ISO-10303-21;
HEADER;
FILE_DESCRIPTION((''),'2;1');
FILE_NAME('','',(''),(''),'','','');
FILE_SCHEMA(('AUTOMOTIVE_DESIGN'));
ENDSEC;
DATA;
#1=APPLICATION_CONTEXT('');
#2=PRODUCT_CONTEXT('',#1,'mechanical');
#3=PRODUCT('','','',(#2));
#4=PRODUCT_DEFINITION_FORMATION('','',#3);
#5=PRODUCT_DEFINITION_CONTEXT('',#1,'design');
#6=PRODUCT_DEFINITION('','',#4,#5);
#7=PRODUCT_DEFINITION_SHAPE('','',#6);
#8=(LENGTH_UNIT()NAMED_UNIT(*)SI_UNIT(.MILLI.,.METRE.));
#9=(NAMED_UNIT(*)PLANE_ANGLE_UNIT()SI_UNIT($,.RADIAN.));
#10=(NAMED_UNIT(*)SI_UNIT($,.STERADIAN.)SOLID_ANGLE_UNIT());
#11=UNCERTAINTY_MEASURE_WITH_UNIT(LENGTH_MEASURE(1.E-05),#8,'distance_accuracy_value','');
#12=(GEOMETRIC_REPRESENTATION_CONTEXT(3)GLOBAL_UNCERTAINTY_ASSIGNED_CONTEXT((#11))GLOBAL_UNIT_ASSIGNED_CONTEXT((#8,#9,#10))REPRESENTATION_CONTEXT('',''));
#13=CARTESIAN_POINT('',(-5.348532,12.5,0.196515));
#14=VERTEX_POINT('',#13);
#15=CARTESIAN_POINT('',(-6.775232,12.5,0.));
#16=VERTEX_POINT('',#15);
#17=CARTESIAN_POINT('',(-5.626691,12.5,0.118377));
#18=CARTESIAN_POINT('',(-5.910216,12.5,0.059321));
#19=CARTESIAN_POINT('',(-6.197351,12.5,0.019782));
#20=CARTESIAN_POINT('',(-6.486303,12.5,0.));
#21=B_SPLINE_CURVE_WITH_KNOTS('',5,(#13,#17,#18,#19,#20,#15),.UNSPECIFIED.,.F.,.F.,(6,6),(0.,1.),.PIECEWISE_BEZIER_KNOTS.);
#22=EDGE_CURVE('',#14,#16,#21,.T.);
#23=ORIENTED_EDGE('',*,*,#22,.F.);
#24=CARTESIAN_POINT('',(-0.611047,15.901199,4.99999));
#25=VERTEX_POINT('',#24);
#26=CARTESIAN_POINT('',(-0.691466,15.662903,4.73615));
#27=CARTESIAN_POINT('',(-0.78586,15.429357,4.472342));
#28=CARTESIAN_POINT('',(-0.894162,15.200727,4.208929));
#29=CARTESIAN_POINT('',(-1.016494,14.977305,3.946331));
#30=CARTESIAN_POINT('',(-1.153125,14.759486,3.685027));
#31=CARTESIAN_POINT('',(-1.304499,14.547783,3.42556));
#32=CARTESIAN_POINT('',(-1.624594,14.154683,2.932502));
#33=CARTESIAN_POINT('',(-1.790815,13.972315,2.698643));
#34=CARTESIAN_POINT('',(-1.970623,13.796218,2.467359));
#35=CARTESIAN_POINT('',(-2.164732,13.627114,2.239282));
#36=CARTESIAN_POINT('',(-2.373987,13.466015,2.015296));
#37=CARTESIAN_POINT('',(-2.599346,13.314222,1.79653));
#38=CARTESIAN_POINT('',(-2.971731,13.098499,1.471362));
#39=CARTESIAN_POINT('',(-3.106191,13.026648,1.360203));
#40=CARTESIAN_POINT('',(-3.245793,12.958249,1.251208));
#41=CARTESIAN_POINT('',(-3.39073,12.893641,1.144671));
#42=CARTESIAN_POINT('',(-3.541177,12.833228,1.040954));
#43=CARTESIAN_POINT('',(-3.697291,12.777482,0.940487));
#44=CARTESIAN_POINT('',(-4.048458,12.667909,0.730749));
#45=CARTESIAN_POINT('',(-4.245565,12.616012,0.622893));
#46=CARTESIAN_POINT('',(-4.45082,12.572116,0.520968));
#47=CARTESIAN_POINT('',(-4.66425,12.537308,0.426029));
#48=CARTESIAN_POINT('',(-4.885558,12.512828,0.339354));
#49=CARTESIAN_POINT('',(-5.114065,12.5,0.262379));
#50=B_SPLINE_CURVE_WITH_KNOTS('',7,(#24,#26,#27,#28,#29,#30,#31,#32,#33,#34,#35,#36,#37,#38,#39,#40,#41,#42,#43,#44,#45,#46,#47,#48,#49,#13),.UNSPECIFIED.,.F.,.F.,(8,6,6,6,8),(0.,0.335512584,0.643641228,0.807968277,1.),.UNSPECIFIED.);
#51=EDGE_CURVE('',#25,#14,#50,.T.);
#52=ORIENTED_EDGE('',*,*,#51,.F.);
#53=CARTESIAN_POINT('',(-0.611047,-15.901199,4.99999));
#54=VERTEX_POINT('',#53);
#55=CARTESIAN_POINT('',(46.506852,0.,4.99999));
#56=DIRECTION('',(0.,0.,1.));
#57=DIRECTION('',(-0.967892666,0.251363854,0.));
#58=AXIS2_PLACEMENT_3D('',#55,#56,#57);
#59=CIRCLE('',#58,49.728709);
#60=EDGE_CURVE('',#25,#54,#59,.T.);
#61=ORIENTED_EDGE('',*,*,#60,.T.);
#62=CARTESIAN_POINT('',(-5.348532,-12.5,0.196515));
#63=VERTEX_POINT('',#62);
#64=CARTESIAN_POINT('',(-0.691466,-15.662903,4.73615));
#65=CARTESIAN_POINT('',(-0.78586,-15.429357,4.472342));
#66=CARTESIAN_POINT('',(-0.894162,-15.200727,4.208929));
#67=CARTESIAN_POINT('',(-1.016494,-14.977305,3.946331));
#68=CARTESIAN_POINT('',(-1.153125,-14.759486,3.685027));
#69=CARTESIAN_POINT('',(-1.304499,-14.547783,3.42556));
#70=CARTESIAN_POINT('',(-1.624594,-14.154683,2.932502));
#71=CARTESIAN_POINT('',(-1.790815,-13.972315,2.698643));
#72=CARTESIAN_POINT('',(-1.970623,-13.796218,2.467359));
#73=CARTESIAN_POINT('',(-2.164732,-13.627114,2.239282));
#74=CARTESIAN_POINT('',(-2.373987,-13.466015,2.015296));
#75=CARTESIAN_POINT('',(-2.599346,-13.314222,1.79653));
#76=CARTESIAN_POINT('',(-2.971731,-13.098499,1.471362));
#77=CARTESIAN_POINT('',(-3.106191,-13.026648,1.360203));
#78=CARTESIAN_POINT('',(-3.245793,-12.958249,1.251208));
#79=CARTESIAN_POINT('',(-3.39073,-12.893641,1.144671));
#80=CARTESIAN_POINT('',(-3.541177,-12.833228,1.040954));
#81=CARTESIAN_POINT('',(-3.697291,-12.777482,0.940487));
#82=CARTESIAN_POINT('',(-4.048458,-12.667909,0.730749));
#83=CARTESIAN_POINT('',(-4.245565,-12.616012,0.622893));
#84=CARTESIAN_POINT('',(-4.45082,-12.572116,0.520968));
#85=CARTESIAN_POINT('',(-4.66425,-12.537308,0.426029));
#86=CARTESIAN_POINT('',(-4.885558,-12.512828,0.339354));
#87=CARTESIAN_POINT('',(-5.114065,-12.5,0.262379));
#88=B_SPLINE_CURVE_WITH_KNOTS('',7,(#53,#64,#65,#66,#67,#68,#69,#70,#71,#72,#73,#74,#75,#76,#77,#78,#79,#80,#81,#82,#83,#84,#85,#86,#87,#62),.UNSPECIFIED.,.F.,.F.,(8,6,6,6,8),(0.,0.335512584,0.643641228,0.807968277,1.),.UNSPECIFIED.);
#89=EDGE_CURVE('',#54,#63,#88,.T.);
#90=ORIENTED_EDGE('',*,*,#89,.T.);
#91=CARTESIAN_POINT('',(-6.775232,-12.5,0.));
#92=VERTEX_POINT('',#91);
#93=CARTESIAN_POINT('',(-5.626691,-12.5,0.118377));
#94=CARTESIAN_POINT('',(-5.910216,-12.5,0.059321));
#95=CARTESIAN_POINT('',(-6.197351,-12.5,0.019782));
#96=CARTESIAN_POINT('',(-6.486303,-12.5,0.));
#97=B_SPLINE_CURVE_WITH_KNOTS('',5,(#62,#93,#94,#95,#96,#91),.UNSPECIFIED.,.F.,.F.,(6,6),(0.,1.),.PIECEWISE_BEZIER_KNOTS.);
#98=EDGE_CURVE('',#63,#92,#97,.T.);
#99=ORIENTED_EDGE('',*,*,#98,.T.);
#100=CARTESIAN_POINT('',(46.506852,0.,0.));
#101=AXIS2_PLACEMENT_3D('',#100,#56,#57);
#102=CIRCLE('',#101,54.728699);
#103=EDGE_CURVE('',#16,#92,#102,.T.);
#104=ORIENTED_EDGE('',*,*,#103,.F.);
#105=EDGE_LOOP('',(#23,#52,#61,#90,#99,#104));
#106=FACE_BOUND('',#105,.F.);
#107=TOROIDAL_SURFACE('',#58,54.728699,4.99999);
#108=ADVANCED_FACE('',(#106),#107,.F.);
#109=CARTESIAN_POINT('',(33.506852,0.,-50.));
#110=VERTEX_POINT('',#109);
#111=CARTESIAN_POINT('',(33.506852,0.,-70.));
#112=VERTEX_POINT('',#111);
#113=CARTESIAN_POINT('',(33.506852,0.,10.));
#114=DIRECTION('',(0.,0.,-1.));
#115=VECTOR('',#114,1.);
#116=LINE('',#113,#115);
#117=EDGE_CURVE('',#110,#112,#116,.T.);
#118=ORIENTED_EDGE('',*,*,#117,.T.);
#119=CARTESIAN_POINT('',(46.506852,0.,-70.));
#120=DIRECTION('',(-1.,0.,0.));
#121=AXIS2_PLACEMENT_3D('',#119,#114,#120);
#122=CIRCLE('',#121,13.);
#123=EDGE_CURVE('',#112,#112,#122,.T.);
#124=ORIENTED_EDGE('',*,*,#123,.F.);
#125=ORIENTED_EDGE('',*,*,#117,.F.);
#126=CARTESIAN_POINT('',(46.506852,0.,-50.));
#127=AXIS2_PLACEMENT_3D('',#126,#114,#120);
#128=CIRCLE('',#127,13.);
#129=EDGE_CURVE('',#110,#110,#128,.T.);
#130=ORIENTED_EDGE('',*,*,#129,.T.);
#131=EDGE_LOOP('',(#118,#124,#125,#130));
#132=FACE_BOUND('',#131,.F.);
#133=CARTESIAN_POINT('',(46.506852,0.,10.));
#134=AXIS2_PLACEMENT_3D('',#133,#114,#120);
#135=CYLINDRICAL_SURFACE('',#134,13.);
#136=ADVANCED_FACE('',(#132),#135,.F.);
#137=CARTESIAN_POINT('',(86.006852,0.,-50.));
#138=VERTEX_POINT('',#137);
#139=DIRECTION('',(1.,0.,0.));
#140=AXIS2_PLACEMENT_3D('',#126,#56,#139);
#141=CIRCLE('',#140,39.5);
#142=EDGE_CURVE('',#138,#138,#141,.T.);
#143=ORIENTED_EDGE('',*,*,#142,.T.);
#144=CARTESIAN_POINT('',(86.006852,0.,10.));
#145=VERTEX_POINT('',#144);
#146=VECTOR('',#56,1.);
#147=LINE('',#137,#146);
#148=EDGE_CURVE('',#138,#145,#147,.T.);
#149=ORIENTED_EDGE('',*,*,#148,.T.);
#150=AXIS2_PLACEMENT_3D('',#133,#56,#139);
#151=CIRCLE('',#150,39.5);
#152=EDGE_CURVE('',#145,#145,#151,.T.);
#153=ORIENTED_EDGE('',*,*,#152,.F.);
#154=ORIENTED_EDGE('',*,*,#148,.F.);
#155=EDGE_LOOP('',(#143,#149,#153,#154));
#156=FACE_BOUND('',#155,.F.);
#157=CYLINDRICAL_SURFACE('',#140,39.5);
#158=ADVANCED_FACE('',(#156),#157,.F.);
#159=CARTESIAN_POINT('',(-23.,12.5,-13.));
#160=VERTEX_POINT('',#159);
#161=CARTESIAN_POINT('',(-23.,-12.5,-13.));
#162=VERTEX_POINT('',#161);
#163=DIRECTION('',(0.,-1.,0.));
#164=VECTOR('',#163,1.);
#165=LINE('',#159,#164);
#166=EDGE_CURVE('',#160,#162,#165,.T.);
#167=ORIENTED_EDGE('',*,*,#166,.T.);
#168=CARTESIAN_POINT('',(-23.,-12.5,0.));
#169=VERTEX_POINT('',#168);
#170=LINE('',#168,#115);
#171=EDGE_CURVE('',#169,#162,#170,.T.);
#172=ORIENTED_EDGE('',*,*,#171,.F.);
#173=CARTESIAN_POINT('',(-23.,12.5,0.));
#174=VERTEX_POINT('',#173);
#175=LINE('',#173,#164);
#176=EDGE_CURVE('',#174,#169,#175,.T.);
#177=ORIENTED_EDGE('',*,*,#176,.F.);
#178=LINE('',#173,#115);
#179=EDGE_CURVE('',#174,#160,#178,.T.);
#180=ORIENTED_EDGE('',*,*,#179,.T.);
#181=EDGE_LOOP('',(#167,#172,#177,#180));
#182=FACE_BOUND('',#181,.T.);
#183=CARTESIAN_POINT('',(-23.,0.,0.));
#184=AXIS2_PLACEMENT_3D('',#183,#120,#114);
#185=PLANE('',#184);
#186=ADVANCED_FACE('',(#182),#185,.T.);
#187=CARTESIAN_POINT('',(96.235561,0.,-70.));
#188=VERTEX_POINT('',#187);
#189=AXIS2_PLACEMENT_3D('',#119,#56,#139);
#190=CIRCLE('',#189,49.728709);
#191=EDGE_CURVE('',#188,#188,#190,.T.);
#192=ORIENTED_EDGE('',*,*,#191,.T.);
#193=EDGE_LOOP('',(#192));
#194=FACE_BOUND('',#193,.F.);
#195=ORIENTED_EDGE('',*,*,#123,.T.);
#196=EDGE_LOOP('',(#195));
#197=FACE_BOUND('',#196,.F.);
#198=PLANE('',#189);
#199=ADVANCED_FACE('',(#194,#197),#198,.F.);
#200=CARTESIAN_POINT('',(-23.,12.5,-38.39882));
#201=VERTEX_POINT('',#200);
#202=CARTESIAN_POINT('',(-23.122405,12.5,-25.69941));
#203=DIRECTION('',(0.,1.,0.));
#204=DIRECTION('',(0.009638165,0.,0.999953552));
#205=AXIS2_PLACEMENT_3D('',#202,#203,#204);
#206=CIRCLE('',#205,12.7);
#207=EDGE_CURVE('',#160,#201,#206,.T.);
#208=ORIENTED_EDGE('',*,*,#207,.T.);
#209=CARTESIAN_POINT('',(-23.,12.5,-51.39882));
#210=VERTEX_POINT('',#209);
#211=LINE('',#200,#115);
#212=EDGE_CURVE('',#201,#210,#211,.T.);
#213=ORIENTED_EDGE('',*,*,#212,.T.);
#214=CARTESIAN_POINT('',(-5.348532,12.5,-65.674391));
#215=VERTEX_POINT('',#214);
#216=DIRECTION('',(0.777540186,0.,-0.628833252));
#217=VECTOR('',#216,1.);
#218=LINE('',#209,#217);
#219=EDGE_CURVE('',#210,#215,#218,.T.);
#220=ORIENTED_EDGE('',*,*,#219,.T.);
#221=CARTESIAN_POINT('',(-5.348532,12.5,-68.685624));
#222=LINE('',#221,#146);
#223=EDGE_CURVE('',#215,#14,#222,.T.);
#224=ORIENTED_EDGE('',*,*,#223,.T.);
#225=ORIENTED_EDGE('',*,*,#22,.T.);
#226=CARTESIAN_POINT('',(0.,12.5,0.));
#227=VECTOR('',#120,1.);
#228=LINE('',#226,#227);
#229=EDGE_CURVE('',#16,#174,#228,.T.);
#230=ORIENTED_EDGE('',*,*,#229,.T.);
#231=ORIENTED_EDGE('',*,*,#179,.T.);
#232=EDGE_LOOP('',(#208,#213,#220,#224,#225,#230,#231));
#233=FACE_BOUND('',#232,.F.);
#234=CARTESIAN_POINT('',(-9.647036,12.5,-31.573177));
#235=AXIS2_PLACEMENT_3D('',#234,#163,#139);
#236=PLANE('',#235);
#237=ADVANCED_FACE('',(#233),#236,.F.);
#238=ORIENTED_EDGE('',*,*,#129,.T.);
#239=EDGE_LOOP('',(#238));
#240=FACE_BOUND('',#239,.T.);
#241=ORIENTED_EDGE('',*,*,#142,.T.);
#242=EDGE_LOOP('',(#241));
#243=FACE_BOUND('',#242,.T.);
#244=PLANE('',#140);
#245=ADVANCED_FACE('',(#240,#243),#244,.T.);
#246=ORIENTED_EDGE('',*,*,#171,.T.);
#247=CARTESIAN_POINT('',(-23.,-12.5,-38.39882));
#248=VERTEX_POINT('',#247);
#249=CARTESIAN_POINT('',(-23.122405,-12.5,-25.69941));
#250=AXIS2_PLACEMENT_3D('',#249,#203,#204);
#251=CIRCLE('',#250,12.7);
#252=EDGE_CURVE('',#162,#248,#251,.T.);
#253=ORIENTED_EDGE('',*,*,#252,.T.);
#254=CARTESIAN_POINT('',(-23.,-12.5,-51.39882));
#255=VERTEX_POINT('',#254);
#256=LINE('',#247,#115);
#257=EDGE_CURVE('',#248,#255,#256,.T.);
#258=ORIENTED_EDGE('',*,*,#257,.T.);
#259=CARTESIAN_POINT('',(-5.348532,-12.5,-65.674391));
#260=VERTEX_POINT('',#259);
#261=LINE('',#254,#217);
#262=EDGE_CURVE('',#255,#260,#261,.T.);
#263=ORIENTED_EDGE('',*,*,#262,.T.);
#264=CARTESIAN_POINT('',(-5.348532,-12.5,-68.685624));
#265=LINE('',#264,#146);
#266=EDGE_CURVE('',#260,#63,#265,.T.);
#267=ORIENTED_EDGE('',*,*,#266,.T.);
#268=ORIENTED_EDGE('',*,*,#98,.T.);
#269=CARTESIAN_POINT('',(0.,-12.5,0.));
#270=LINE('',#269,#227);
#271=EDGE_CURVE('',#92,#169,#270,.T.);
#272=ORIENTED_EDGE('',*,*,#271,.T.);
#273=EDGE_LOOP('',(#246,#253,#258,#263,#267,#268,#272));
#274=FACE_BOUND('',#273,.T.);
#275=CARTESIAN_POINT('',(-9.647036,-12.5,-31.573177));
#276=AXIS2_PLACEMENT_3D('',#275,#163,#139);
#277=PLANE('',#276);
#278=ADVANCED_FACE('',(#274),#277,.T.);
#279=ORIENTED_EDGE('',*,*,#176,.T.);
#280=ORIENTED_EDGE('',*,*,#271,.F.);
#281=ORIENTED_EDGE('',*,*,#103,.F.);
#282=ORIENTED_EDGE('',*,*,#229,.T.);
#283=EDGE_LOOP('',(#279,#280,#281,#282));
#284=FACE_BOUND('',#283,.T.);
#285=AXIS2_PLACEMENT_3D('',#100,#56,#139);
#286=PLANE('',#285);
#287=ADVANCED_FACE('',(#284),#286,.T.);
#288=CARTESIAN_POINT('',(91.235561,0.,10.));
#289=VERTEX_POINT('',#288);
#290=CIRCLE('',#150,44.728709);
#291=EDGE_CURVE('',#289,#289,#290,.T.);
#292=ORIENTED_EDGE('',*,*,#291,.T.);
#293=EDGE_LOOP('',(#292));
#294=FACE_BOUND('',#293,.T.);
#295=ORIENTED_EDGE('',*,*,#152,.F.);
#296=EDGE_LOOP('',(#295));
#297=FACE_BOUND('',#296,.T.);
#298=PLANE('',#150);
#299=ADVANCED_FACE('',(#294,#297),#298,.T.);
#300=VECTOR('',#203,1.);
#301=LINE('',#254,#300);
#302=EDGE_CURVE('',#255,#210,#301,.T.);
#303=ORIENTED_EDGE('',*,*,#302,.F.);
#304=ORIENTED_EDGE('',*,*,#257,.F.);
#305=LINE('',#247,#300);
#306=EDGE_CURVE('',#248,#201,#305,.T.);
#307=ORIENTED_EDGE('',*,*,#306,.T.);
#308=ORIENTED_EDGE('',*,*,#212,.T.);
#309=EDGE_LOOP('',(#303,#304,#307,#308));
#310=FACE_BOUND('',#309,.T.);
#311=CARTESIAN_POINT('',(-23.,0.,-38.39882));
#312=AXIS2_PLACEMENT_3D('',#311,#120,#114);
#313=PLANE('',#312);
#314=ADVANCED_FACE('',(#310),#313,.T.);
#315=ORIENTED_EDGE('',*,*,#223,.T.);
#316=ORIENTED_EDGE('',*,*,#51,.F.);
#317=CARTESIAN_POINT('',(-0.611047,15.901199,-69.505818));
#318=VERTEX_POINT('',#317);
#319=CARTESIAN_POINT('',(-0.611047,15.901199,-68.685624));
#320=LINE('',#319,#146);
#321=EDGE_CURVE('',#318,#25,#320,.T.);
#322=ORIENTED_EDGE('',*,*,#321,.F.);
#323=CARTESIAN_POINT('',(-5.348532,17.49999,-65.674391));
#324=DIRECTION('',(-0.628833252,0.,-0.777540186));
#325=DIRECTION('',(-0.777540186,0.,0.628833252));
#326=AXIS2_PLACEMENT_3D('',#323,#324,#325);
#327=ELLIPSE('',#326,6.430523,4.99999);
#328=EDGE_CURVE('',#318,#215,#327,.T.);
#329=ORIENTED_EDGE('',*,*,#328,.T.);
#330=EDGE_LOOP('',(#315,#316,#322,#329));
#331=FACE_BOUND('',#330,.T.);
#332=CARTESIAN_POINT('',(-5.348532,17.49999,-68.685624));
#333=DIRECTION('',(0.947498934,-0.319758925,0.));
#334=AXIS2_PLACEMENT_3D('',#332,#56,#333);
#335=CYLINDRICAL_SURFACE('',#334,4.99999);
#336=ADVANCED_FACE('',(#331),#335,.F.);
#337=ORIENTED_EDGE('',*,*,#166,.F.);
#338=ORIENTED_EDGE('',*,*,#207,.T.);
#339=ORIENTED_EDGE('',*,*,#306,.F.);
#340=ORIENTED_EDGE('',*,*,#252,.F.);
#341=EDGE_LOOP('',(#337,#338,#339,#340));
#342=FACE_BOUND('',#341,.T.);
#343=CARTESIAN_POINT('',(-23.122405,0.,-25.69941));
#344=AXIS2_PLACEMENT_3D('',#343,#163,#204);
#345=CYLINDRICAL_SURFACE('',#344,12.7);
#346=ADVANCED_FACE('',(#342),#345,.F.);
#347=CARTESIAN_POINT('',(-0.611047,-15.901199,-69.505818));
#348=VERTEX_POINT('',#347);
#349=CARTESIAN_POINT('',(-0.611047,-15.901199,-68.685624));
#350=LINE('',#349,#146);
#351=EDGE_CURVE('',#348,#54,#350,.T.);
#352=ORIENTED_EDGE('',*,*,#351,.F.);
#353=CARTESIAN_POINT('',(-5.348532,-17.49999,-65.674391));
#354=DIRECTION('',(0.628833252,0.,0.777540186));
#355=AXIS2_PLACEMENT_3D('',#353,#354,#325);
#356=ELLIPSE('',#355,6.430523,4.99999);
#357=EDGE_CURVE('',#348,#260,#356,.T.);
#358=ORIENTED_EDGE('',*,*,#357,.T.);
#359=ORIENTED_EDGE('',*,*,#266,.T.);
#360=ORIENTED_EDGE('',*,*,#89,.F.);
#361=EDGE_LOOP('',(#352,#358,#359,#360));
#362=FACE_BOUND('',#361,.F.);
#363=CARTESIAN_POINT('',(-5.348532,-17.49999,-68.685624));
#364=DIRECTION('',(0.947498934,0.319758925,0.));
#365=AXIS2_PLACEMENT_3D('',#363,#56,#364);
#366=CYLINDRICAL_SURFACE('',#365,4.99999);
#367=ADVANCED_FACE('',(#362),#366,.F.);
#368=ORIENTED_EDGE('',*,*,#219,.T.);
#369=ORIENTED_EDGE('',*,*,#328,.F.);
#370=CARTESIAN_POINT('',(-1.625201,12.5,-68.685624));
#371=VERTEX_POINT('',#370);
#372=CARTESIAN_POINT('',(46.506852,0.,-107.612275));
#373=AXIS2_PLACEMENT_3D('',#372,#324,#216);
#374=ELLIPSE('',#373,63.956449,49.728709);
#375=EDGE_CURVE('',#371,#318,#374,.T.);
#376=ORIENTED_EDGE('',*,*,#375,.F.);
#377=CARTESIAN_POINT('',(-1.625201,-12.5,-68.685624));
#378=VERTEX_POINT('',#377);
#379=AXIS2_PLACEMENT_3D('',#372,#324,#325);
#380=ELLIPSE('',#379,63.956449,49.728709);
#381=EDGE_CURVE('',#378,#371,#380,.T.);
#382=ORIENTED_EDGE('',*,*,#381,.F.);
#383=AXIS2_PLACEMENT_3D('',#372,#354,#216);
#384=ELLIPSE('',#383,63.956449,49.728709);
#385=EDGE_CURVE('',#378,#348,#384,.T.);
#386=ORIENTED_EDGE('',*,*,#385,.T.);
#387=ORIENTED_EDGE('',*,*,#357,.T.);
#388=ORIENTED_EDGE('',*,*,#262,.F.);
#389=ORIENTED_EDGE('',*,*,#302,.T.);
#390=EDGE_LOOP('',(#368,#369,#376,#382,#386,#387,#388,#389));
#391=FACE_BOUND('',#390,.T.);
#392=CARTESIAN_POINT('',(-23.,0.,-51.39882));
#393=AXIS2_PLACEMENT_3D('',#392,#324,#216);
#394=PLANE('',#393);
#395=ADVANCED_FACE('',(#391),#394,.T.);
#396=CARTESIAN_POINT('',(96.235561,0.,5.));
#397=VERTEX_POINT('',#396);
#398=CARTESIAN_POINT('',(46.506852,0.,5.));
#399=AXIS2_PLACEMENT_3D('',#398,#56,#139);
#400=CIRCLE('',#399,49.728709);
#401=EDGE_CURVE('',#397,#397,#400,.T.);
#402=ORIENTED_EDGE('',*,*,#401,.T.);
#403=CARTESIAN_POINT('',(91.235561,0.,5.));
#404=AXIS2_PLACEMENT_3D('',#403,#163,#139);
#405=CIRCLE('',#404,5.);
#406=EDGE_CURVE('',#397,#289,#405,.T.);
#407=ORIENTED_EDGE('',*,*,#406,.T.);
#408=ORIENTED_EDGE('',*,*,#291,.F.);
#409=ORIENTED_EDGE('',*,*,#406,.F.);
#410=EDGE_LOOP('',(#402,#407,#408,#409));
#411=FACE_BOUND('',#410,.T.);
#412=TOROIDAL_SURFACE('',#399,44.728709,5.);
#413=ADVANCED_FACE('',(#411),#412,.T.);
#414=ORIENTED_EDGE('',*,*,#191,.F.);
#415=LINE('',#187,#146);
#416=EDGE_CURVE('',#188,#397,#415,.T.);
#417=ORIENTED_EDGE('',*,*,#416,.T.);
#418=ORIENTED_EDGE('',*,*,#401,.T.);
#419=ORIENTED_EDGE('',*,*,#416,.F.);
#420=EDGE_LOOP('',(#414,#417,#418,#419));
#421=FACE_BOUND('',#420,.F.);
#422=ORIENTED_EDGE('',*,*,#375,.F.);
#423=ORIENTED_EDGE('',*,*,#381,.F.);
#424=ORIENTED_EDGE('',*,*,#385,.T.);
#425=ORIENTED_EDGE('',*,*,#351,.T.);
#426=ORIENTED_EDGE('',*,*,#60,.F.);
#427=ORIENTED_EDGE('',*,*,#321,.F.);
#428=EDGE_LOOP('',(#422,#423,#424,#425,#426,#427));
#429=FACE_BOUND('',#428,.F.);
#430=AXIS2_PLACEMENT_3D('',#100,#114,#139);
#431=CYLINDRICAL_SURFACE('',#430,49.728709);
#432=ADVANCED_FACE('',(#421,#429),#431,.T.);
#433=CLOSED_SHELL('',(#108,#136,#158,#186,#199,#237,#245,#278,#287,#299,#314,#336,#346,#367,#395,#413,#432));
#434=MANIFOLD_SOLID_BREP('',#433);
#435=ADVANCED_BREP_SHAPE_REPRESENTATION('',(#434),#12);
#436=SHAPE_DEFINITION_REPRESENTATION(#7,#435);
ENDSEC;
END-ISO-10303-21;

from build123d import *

# Parameters (mm, degrees)
F1_DEPTH       = 12.5
F2_R           = 49.7287092038
F3_DEPTH       = 70
F5_DEPTH       = 10
F8_D           = 26
F8_CBORE_D     = 79
F8_CBORE_DEPTH = 60
F9_R           = 5
F10_R          = 4.99999


# Not quite as in the source:
# - a fillet or chamfer is up to 0.001 mm smaller than in the source, because OpenCascade refuses the exact size
# - a feature names something its author has since deleted; it is built from what else it names


with BuildPart() as f1:
    # F0 (on Front) → F1 (new body, symmetric)
    with BuildSketch(Plane.XZ):
        with BuildLine():
            Line((0, -70), (0, 0))
            Line((0, 0), (-23, 0))
            Line((-23, 0), (-23, -13))
            ThreePointArc((-23, -13), (-10.4224046937, -25.699410108), (-23, -38.398820216))
            Line((-23, -38.398820216), (-23, -51.398820216))
            Line((-23, -51.398820216), (0, -70))
        make_face()
    extrude(amount=F1_DEPTH, both=True)

    # F2 (on Top) → F3 (join)
    with BuildSketch(Plane.XY):
        with Locations((46.5068519115, 0)):
            Circle(F2_R)
    extrude(amount=-F3_DEPTH)

    # F2 (on Top) → F5 (join)
    with BuildSketch(Plane.XY):
        with Locations((46.5068519115, 0)):
            Circle(F2_R)
    extrude(amount=F5_DEPTH)

    # F8 (through all)
    with Locations(Plane.XY.offset(10)):
        with Locations((46.5068519115, 0)):
            CounterBoreHole(F8_D / 2, F8_CBORE_D / 2, F8_CBORE_DEPTH)

    # F9
    f9_edges = [f1.edges().sort_by_distance(p)[0] for p in [
        (-3.221857, 0, 10),
    ]]
    fillet(f9_edges, radius=F9_R)

    # F10 (radius 5 in the source; OpenCascade refuses exactly that, so slightly less here)
    f10_edges = [f1.edges().sort_by_distance(p)[0] for p in [
        (-1.625201, 12.5, -34.342812),
        (-1.625201, -12.5, -34.342812),
        (-3.221857, 0, 0),
    ]]
    fillet(f10_edges, radius=F10_R)


solid = f1.part
